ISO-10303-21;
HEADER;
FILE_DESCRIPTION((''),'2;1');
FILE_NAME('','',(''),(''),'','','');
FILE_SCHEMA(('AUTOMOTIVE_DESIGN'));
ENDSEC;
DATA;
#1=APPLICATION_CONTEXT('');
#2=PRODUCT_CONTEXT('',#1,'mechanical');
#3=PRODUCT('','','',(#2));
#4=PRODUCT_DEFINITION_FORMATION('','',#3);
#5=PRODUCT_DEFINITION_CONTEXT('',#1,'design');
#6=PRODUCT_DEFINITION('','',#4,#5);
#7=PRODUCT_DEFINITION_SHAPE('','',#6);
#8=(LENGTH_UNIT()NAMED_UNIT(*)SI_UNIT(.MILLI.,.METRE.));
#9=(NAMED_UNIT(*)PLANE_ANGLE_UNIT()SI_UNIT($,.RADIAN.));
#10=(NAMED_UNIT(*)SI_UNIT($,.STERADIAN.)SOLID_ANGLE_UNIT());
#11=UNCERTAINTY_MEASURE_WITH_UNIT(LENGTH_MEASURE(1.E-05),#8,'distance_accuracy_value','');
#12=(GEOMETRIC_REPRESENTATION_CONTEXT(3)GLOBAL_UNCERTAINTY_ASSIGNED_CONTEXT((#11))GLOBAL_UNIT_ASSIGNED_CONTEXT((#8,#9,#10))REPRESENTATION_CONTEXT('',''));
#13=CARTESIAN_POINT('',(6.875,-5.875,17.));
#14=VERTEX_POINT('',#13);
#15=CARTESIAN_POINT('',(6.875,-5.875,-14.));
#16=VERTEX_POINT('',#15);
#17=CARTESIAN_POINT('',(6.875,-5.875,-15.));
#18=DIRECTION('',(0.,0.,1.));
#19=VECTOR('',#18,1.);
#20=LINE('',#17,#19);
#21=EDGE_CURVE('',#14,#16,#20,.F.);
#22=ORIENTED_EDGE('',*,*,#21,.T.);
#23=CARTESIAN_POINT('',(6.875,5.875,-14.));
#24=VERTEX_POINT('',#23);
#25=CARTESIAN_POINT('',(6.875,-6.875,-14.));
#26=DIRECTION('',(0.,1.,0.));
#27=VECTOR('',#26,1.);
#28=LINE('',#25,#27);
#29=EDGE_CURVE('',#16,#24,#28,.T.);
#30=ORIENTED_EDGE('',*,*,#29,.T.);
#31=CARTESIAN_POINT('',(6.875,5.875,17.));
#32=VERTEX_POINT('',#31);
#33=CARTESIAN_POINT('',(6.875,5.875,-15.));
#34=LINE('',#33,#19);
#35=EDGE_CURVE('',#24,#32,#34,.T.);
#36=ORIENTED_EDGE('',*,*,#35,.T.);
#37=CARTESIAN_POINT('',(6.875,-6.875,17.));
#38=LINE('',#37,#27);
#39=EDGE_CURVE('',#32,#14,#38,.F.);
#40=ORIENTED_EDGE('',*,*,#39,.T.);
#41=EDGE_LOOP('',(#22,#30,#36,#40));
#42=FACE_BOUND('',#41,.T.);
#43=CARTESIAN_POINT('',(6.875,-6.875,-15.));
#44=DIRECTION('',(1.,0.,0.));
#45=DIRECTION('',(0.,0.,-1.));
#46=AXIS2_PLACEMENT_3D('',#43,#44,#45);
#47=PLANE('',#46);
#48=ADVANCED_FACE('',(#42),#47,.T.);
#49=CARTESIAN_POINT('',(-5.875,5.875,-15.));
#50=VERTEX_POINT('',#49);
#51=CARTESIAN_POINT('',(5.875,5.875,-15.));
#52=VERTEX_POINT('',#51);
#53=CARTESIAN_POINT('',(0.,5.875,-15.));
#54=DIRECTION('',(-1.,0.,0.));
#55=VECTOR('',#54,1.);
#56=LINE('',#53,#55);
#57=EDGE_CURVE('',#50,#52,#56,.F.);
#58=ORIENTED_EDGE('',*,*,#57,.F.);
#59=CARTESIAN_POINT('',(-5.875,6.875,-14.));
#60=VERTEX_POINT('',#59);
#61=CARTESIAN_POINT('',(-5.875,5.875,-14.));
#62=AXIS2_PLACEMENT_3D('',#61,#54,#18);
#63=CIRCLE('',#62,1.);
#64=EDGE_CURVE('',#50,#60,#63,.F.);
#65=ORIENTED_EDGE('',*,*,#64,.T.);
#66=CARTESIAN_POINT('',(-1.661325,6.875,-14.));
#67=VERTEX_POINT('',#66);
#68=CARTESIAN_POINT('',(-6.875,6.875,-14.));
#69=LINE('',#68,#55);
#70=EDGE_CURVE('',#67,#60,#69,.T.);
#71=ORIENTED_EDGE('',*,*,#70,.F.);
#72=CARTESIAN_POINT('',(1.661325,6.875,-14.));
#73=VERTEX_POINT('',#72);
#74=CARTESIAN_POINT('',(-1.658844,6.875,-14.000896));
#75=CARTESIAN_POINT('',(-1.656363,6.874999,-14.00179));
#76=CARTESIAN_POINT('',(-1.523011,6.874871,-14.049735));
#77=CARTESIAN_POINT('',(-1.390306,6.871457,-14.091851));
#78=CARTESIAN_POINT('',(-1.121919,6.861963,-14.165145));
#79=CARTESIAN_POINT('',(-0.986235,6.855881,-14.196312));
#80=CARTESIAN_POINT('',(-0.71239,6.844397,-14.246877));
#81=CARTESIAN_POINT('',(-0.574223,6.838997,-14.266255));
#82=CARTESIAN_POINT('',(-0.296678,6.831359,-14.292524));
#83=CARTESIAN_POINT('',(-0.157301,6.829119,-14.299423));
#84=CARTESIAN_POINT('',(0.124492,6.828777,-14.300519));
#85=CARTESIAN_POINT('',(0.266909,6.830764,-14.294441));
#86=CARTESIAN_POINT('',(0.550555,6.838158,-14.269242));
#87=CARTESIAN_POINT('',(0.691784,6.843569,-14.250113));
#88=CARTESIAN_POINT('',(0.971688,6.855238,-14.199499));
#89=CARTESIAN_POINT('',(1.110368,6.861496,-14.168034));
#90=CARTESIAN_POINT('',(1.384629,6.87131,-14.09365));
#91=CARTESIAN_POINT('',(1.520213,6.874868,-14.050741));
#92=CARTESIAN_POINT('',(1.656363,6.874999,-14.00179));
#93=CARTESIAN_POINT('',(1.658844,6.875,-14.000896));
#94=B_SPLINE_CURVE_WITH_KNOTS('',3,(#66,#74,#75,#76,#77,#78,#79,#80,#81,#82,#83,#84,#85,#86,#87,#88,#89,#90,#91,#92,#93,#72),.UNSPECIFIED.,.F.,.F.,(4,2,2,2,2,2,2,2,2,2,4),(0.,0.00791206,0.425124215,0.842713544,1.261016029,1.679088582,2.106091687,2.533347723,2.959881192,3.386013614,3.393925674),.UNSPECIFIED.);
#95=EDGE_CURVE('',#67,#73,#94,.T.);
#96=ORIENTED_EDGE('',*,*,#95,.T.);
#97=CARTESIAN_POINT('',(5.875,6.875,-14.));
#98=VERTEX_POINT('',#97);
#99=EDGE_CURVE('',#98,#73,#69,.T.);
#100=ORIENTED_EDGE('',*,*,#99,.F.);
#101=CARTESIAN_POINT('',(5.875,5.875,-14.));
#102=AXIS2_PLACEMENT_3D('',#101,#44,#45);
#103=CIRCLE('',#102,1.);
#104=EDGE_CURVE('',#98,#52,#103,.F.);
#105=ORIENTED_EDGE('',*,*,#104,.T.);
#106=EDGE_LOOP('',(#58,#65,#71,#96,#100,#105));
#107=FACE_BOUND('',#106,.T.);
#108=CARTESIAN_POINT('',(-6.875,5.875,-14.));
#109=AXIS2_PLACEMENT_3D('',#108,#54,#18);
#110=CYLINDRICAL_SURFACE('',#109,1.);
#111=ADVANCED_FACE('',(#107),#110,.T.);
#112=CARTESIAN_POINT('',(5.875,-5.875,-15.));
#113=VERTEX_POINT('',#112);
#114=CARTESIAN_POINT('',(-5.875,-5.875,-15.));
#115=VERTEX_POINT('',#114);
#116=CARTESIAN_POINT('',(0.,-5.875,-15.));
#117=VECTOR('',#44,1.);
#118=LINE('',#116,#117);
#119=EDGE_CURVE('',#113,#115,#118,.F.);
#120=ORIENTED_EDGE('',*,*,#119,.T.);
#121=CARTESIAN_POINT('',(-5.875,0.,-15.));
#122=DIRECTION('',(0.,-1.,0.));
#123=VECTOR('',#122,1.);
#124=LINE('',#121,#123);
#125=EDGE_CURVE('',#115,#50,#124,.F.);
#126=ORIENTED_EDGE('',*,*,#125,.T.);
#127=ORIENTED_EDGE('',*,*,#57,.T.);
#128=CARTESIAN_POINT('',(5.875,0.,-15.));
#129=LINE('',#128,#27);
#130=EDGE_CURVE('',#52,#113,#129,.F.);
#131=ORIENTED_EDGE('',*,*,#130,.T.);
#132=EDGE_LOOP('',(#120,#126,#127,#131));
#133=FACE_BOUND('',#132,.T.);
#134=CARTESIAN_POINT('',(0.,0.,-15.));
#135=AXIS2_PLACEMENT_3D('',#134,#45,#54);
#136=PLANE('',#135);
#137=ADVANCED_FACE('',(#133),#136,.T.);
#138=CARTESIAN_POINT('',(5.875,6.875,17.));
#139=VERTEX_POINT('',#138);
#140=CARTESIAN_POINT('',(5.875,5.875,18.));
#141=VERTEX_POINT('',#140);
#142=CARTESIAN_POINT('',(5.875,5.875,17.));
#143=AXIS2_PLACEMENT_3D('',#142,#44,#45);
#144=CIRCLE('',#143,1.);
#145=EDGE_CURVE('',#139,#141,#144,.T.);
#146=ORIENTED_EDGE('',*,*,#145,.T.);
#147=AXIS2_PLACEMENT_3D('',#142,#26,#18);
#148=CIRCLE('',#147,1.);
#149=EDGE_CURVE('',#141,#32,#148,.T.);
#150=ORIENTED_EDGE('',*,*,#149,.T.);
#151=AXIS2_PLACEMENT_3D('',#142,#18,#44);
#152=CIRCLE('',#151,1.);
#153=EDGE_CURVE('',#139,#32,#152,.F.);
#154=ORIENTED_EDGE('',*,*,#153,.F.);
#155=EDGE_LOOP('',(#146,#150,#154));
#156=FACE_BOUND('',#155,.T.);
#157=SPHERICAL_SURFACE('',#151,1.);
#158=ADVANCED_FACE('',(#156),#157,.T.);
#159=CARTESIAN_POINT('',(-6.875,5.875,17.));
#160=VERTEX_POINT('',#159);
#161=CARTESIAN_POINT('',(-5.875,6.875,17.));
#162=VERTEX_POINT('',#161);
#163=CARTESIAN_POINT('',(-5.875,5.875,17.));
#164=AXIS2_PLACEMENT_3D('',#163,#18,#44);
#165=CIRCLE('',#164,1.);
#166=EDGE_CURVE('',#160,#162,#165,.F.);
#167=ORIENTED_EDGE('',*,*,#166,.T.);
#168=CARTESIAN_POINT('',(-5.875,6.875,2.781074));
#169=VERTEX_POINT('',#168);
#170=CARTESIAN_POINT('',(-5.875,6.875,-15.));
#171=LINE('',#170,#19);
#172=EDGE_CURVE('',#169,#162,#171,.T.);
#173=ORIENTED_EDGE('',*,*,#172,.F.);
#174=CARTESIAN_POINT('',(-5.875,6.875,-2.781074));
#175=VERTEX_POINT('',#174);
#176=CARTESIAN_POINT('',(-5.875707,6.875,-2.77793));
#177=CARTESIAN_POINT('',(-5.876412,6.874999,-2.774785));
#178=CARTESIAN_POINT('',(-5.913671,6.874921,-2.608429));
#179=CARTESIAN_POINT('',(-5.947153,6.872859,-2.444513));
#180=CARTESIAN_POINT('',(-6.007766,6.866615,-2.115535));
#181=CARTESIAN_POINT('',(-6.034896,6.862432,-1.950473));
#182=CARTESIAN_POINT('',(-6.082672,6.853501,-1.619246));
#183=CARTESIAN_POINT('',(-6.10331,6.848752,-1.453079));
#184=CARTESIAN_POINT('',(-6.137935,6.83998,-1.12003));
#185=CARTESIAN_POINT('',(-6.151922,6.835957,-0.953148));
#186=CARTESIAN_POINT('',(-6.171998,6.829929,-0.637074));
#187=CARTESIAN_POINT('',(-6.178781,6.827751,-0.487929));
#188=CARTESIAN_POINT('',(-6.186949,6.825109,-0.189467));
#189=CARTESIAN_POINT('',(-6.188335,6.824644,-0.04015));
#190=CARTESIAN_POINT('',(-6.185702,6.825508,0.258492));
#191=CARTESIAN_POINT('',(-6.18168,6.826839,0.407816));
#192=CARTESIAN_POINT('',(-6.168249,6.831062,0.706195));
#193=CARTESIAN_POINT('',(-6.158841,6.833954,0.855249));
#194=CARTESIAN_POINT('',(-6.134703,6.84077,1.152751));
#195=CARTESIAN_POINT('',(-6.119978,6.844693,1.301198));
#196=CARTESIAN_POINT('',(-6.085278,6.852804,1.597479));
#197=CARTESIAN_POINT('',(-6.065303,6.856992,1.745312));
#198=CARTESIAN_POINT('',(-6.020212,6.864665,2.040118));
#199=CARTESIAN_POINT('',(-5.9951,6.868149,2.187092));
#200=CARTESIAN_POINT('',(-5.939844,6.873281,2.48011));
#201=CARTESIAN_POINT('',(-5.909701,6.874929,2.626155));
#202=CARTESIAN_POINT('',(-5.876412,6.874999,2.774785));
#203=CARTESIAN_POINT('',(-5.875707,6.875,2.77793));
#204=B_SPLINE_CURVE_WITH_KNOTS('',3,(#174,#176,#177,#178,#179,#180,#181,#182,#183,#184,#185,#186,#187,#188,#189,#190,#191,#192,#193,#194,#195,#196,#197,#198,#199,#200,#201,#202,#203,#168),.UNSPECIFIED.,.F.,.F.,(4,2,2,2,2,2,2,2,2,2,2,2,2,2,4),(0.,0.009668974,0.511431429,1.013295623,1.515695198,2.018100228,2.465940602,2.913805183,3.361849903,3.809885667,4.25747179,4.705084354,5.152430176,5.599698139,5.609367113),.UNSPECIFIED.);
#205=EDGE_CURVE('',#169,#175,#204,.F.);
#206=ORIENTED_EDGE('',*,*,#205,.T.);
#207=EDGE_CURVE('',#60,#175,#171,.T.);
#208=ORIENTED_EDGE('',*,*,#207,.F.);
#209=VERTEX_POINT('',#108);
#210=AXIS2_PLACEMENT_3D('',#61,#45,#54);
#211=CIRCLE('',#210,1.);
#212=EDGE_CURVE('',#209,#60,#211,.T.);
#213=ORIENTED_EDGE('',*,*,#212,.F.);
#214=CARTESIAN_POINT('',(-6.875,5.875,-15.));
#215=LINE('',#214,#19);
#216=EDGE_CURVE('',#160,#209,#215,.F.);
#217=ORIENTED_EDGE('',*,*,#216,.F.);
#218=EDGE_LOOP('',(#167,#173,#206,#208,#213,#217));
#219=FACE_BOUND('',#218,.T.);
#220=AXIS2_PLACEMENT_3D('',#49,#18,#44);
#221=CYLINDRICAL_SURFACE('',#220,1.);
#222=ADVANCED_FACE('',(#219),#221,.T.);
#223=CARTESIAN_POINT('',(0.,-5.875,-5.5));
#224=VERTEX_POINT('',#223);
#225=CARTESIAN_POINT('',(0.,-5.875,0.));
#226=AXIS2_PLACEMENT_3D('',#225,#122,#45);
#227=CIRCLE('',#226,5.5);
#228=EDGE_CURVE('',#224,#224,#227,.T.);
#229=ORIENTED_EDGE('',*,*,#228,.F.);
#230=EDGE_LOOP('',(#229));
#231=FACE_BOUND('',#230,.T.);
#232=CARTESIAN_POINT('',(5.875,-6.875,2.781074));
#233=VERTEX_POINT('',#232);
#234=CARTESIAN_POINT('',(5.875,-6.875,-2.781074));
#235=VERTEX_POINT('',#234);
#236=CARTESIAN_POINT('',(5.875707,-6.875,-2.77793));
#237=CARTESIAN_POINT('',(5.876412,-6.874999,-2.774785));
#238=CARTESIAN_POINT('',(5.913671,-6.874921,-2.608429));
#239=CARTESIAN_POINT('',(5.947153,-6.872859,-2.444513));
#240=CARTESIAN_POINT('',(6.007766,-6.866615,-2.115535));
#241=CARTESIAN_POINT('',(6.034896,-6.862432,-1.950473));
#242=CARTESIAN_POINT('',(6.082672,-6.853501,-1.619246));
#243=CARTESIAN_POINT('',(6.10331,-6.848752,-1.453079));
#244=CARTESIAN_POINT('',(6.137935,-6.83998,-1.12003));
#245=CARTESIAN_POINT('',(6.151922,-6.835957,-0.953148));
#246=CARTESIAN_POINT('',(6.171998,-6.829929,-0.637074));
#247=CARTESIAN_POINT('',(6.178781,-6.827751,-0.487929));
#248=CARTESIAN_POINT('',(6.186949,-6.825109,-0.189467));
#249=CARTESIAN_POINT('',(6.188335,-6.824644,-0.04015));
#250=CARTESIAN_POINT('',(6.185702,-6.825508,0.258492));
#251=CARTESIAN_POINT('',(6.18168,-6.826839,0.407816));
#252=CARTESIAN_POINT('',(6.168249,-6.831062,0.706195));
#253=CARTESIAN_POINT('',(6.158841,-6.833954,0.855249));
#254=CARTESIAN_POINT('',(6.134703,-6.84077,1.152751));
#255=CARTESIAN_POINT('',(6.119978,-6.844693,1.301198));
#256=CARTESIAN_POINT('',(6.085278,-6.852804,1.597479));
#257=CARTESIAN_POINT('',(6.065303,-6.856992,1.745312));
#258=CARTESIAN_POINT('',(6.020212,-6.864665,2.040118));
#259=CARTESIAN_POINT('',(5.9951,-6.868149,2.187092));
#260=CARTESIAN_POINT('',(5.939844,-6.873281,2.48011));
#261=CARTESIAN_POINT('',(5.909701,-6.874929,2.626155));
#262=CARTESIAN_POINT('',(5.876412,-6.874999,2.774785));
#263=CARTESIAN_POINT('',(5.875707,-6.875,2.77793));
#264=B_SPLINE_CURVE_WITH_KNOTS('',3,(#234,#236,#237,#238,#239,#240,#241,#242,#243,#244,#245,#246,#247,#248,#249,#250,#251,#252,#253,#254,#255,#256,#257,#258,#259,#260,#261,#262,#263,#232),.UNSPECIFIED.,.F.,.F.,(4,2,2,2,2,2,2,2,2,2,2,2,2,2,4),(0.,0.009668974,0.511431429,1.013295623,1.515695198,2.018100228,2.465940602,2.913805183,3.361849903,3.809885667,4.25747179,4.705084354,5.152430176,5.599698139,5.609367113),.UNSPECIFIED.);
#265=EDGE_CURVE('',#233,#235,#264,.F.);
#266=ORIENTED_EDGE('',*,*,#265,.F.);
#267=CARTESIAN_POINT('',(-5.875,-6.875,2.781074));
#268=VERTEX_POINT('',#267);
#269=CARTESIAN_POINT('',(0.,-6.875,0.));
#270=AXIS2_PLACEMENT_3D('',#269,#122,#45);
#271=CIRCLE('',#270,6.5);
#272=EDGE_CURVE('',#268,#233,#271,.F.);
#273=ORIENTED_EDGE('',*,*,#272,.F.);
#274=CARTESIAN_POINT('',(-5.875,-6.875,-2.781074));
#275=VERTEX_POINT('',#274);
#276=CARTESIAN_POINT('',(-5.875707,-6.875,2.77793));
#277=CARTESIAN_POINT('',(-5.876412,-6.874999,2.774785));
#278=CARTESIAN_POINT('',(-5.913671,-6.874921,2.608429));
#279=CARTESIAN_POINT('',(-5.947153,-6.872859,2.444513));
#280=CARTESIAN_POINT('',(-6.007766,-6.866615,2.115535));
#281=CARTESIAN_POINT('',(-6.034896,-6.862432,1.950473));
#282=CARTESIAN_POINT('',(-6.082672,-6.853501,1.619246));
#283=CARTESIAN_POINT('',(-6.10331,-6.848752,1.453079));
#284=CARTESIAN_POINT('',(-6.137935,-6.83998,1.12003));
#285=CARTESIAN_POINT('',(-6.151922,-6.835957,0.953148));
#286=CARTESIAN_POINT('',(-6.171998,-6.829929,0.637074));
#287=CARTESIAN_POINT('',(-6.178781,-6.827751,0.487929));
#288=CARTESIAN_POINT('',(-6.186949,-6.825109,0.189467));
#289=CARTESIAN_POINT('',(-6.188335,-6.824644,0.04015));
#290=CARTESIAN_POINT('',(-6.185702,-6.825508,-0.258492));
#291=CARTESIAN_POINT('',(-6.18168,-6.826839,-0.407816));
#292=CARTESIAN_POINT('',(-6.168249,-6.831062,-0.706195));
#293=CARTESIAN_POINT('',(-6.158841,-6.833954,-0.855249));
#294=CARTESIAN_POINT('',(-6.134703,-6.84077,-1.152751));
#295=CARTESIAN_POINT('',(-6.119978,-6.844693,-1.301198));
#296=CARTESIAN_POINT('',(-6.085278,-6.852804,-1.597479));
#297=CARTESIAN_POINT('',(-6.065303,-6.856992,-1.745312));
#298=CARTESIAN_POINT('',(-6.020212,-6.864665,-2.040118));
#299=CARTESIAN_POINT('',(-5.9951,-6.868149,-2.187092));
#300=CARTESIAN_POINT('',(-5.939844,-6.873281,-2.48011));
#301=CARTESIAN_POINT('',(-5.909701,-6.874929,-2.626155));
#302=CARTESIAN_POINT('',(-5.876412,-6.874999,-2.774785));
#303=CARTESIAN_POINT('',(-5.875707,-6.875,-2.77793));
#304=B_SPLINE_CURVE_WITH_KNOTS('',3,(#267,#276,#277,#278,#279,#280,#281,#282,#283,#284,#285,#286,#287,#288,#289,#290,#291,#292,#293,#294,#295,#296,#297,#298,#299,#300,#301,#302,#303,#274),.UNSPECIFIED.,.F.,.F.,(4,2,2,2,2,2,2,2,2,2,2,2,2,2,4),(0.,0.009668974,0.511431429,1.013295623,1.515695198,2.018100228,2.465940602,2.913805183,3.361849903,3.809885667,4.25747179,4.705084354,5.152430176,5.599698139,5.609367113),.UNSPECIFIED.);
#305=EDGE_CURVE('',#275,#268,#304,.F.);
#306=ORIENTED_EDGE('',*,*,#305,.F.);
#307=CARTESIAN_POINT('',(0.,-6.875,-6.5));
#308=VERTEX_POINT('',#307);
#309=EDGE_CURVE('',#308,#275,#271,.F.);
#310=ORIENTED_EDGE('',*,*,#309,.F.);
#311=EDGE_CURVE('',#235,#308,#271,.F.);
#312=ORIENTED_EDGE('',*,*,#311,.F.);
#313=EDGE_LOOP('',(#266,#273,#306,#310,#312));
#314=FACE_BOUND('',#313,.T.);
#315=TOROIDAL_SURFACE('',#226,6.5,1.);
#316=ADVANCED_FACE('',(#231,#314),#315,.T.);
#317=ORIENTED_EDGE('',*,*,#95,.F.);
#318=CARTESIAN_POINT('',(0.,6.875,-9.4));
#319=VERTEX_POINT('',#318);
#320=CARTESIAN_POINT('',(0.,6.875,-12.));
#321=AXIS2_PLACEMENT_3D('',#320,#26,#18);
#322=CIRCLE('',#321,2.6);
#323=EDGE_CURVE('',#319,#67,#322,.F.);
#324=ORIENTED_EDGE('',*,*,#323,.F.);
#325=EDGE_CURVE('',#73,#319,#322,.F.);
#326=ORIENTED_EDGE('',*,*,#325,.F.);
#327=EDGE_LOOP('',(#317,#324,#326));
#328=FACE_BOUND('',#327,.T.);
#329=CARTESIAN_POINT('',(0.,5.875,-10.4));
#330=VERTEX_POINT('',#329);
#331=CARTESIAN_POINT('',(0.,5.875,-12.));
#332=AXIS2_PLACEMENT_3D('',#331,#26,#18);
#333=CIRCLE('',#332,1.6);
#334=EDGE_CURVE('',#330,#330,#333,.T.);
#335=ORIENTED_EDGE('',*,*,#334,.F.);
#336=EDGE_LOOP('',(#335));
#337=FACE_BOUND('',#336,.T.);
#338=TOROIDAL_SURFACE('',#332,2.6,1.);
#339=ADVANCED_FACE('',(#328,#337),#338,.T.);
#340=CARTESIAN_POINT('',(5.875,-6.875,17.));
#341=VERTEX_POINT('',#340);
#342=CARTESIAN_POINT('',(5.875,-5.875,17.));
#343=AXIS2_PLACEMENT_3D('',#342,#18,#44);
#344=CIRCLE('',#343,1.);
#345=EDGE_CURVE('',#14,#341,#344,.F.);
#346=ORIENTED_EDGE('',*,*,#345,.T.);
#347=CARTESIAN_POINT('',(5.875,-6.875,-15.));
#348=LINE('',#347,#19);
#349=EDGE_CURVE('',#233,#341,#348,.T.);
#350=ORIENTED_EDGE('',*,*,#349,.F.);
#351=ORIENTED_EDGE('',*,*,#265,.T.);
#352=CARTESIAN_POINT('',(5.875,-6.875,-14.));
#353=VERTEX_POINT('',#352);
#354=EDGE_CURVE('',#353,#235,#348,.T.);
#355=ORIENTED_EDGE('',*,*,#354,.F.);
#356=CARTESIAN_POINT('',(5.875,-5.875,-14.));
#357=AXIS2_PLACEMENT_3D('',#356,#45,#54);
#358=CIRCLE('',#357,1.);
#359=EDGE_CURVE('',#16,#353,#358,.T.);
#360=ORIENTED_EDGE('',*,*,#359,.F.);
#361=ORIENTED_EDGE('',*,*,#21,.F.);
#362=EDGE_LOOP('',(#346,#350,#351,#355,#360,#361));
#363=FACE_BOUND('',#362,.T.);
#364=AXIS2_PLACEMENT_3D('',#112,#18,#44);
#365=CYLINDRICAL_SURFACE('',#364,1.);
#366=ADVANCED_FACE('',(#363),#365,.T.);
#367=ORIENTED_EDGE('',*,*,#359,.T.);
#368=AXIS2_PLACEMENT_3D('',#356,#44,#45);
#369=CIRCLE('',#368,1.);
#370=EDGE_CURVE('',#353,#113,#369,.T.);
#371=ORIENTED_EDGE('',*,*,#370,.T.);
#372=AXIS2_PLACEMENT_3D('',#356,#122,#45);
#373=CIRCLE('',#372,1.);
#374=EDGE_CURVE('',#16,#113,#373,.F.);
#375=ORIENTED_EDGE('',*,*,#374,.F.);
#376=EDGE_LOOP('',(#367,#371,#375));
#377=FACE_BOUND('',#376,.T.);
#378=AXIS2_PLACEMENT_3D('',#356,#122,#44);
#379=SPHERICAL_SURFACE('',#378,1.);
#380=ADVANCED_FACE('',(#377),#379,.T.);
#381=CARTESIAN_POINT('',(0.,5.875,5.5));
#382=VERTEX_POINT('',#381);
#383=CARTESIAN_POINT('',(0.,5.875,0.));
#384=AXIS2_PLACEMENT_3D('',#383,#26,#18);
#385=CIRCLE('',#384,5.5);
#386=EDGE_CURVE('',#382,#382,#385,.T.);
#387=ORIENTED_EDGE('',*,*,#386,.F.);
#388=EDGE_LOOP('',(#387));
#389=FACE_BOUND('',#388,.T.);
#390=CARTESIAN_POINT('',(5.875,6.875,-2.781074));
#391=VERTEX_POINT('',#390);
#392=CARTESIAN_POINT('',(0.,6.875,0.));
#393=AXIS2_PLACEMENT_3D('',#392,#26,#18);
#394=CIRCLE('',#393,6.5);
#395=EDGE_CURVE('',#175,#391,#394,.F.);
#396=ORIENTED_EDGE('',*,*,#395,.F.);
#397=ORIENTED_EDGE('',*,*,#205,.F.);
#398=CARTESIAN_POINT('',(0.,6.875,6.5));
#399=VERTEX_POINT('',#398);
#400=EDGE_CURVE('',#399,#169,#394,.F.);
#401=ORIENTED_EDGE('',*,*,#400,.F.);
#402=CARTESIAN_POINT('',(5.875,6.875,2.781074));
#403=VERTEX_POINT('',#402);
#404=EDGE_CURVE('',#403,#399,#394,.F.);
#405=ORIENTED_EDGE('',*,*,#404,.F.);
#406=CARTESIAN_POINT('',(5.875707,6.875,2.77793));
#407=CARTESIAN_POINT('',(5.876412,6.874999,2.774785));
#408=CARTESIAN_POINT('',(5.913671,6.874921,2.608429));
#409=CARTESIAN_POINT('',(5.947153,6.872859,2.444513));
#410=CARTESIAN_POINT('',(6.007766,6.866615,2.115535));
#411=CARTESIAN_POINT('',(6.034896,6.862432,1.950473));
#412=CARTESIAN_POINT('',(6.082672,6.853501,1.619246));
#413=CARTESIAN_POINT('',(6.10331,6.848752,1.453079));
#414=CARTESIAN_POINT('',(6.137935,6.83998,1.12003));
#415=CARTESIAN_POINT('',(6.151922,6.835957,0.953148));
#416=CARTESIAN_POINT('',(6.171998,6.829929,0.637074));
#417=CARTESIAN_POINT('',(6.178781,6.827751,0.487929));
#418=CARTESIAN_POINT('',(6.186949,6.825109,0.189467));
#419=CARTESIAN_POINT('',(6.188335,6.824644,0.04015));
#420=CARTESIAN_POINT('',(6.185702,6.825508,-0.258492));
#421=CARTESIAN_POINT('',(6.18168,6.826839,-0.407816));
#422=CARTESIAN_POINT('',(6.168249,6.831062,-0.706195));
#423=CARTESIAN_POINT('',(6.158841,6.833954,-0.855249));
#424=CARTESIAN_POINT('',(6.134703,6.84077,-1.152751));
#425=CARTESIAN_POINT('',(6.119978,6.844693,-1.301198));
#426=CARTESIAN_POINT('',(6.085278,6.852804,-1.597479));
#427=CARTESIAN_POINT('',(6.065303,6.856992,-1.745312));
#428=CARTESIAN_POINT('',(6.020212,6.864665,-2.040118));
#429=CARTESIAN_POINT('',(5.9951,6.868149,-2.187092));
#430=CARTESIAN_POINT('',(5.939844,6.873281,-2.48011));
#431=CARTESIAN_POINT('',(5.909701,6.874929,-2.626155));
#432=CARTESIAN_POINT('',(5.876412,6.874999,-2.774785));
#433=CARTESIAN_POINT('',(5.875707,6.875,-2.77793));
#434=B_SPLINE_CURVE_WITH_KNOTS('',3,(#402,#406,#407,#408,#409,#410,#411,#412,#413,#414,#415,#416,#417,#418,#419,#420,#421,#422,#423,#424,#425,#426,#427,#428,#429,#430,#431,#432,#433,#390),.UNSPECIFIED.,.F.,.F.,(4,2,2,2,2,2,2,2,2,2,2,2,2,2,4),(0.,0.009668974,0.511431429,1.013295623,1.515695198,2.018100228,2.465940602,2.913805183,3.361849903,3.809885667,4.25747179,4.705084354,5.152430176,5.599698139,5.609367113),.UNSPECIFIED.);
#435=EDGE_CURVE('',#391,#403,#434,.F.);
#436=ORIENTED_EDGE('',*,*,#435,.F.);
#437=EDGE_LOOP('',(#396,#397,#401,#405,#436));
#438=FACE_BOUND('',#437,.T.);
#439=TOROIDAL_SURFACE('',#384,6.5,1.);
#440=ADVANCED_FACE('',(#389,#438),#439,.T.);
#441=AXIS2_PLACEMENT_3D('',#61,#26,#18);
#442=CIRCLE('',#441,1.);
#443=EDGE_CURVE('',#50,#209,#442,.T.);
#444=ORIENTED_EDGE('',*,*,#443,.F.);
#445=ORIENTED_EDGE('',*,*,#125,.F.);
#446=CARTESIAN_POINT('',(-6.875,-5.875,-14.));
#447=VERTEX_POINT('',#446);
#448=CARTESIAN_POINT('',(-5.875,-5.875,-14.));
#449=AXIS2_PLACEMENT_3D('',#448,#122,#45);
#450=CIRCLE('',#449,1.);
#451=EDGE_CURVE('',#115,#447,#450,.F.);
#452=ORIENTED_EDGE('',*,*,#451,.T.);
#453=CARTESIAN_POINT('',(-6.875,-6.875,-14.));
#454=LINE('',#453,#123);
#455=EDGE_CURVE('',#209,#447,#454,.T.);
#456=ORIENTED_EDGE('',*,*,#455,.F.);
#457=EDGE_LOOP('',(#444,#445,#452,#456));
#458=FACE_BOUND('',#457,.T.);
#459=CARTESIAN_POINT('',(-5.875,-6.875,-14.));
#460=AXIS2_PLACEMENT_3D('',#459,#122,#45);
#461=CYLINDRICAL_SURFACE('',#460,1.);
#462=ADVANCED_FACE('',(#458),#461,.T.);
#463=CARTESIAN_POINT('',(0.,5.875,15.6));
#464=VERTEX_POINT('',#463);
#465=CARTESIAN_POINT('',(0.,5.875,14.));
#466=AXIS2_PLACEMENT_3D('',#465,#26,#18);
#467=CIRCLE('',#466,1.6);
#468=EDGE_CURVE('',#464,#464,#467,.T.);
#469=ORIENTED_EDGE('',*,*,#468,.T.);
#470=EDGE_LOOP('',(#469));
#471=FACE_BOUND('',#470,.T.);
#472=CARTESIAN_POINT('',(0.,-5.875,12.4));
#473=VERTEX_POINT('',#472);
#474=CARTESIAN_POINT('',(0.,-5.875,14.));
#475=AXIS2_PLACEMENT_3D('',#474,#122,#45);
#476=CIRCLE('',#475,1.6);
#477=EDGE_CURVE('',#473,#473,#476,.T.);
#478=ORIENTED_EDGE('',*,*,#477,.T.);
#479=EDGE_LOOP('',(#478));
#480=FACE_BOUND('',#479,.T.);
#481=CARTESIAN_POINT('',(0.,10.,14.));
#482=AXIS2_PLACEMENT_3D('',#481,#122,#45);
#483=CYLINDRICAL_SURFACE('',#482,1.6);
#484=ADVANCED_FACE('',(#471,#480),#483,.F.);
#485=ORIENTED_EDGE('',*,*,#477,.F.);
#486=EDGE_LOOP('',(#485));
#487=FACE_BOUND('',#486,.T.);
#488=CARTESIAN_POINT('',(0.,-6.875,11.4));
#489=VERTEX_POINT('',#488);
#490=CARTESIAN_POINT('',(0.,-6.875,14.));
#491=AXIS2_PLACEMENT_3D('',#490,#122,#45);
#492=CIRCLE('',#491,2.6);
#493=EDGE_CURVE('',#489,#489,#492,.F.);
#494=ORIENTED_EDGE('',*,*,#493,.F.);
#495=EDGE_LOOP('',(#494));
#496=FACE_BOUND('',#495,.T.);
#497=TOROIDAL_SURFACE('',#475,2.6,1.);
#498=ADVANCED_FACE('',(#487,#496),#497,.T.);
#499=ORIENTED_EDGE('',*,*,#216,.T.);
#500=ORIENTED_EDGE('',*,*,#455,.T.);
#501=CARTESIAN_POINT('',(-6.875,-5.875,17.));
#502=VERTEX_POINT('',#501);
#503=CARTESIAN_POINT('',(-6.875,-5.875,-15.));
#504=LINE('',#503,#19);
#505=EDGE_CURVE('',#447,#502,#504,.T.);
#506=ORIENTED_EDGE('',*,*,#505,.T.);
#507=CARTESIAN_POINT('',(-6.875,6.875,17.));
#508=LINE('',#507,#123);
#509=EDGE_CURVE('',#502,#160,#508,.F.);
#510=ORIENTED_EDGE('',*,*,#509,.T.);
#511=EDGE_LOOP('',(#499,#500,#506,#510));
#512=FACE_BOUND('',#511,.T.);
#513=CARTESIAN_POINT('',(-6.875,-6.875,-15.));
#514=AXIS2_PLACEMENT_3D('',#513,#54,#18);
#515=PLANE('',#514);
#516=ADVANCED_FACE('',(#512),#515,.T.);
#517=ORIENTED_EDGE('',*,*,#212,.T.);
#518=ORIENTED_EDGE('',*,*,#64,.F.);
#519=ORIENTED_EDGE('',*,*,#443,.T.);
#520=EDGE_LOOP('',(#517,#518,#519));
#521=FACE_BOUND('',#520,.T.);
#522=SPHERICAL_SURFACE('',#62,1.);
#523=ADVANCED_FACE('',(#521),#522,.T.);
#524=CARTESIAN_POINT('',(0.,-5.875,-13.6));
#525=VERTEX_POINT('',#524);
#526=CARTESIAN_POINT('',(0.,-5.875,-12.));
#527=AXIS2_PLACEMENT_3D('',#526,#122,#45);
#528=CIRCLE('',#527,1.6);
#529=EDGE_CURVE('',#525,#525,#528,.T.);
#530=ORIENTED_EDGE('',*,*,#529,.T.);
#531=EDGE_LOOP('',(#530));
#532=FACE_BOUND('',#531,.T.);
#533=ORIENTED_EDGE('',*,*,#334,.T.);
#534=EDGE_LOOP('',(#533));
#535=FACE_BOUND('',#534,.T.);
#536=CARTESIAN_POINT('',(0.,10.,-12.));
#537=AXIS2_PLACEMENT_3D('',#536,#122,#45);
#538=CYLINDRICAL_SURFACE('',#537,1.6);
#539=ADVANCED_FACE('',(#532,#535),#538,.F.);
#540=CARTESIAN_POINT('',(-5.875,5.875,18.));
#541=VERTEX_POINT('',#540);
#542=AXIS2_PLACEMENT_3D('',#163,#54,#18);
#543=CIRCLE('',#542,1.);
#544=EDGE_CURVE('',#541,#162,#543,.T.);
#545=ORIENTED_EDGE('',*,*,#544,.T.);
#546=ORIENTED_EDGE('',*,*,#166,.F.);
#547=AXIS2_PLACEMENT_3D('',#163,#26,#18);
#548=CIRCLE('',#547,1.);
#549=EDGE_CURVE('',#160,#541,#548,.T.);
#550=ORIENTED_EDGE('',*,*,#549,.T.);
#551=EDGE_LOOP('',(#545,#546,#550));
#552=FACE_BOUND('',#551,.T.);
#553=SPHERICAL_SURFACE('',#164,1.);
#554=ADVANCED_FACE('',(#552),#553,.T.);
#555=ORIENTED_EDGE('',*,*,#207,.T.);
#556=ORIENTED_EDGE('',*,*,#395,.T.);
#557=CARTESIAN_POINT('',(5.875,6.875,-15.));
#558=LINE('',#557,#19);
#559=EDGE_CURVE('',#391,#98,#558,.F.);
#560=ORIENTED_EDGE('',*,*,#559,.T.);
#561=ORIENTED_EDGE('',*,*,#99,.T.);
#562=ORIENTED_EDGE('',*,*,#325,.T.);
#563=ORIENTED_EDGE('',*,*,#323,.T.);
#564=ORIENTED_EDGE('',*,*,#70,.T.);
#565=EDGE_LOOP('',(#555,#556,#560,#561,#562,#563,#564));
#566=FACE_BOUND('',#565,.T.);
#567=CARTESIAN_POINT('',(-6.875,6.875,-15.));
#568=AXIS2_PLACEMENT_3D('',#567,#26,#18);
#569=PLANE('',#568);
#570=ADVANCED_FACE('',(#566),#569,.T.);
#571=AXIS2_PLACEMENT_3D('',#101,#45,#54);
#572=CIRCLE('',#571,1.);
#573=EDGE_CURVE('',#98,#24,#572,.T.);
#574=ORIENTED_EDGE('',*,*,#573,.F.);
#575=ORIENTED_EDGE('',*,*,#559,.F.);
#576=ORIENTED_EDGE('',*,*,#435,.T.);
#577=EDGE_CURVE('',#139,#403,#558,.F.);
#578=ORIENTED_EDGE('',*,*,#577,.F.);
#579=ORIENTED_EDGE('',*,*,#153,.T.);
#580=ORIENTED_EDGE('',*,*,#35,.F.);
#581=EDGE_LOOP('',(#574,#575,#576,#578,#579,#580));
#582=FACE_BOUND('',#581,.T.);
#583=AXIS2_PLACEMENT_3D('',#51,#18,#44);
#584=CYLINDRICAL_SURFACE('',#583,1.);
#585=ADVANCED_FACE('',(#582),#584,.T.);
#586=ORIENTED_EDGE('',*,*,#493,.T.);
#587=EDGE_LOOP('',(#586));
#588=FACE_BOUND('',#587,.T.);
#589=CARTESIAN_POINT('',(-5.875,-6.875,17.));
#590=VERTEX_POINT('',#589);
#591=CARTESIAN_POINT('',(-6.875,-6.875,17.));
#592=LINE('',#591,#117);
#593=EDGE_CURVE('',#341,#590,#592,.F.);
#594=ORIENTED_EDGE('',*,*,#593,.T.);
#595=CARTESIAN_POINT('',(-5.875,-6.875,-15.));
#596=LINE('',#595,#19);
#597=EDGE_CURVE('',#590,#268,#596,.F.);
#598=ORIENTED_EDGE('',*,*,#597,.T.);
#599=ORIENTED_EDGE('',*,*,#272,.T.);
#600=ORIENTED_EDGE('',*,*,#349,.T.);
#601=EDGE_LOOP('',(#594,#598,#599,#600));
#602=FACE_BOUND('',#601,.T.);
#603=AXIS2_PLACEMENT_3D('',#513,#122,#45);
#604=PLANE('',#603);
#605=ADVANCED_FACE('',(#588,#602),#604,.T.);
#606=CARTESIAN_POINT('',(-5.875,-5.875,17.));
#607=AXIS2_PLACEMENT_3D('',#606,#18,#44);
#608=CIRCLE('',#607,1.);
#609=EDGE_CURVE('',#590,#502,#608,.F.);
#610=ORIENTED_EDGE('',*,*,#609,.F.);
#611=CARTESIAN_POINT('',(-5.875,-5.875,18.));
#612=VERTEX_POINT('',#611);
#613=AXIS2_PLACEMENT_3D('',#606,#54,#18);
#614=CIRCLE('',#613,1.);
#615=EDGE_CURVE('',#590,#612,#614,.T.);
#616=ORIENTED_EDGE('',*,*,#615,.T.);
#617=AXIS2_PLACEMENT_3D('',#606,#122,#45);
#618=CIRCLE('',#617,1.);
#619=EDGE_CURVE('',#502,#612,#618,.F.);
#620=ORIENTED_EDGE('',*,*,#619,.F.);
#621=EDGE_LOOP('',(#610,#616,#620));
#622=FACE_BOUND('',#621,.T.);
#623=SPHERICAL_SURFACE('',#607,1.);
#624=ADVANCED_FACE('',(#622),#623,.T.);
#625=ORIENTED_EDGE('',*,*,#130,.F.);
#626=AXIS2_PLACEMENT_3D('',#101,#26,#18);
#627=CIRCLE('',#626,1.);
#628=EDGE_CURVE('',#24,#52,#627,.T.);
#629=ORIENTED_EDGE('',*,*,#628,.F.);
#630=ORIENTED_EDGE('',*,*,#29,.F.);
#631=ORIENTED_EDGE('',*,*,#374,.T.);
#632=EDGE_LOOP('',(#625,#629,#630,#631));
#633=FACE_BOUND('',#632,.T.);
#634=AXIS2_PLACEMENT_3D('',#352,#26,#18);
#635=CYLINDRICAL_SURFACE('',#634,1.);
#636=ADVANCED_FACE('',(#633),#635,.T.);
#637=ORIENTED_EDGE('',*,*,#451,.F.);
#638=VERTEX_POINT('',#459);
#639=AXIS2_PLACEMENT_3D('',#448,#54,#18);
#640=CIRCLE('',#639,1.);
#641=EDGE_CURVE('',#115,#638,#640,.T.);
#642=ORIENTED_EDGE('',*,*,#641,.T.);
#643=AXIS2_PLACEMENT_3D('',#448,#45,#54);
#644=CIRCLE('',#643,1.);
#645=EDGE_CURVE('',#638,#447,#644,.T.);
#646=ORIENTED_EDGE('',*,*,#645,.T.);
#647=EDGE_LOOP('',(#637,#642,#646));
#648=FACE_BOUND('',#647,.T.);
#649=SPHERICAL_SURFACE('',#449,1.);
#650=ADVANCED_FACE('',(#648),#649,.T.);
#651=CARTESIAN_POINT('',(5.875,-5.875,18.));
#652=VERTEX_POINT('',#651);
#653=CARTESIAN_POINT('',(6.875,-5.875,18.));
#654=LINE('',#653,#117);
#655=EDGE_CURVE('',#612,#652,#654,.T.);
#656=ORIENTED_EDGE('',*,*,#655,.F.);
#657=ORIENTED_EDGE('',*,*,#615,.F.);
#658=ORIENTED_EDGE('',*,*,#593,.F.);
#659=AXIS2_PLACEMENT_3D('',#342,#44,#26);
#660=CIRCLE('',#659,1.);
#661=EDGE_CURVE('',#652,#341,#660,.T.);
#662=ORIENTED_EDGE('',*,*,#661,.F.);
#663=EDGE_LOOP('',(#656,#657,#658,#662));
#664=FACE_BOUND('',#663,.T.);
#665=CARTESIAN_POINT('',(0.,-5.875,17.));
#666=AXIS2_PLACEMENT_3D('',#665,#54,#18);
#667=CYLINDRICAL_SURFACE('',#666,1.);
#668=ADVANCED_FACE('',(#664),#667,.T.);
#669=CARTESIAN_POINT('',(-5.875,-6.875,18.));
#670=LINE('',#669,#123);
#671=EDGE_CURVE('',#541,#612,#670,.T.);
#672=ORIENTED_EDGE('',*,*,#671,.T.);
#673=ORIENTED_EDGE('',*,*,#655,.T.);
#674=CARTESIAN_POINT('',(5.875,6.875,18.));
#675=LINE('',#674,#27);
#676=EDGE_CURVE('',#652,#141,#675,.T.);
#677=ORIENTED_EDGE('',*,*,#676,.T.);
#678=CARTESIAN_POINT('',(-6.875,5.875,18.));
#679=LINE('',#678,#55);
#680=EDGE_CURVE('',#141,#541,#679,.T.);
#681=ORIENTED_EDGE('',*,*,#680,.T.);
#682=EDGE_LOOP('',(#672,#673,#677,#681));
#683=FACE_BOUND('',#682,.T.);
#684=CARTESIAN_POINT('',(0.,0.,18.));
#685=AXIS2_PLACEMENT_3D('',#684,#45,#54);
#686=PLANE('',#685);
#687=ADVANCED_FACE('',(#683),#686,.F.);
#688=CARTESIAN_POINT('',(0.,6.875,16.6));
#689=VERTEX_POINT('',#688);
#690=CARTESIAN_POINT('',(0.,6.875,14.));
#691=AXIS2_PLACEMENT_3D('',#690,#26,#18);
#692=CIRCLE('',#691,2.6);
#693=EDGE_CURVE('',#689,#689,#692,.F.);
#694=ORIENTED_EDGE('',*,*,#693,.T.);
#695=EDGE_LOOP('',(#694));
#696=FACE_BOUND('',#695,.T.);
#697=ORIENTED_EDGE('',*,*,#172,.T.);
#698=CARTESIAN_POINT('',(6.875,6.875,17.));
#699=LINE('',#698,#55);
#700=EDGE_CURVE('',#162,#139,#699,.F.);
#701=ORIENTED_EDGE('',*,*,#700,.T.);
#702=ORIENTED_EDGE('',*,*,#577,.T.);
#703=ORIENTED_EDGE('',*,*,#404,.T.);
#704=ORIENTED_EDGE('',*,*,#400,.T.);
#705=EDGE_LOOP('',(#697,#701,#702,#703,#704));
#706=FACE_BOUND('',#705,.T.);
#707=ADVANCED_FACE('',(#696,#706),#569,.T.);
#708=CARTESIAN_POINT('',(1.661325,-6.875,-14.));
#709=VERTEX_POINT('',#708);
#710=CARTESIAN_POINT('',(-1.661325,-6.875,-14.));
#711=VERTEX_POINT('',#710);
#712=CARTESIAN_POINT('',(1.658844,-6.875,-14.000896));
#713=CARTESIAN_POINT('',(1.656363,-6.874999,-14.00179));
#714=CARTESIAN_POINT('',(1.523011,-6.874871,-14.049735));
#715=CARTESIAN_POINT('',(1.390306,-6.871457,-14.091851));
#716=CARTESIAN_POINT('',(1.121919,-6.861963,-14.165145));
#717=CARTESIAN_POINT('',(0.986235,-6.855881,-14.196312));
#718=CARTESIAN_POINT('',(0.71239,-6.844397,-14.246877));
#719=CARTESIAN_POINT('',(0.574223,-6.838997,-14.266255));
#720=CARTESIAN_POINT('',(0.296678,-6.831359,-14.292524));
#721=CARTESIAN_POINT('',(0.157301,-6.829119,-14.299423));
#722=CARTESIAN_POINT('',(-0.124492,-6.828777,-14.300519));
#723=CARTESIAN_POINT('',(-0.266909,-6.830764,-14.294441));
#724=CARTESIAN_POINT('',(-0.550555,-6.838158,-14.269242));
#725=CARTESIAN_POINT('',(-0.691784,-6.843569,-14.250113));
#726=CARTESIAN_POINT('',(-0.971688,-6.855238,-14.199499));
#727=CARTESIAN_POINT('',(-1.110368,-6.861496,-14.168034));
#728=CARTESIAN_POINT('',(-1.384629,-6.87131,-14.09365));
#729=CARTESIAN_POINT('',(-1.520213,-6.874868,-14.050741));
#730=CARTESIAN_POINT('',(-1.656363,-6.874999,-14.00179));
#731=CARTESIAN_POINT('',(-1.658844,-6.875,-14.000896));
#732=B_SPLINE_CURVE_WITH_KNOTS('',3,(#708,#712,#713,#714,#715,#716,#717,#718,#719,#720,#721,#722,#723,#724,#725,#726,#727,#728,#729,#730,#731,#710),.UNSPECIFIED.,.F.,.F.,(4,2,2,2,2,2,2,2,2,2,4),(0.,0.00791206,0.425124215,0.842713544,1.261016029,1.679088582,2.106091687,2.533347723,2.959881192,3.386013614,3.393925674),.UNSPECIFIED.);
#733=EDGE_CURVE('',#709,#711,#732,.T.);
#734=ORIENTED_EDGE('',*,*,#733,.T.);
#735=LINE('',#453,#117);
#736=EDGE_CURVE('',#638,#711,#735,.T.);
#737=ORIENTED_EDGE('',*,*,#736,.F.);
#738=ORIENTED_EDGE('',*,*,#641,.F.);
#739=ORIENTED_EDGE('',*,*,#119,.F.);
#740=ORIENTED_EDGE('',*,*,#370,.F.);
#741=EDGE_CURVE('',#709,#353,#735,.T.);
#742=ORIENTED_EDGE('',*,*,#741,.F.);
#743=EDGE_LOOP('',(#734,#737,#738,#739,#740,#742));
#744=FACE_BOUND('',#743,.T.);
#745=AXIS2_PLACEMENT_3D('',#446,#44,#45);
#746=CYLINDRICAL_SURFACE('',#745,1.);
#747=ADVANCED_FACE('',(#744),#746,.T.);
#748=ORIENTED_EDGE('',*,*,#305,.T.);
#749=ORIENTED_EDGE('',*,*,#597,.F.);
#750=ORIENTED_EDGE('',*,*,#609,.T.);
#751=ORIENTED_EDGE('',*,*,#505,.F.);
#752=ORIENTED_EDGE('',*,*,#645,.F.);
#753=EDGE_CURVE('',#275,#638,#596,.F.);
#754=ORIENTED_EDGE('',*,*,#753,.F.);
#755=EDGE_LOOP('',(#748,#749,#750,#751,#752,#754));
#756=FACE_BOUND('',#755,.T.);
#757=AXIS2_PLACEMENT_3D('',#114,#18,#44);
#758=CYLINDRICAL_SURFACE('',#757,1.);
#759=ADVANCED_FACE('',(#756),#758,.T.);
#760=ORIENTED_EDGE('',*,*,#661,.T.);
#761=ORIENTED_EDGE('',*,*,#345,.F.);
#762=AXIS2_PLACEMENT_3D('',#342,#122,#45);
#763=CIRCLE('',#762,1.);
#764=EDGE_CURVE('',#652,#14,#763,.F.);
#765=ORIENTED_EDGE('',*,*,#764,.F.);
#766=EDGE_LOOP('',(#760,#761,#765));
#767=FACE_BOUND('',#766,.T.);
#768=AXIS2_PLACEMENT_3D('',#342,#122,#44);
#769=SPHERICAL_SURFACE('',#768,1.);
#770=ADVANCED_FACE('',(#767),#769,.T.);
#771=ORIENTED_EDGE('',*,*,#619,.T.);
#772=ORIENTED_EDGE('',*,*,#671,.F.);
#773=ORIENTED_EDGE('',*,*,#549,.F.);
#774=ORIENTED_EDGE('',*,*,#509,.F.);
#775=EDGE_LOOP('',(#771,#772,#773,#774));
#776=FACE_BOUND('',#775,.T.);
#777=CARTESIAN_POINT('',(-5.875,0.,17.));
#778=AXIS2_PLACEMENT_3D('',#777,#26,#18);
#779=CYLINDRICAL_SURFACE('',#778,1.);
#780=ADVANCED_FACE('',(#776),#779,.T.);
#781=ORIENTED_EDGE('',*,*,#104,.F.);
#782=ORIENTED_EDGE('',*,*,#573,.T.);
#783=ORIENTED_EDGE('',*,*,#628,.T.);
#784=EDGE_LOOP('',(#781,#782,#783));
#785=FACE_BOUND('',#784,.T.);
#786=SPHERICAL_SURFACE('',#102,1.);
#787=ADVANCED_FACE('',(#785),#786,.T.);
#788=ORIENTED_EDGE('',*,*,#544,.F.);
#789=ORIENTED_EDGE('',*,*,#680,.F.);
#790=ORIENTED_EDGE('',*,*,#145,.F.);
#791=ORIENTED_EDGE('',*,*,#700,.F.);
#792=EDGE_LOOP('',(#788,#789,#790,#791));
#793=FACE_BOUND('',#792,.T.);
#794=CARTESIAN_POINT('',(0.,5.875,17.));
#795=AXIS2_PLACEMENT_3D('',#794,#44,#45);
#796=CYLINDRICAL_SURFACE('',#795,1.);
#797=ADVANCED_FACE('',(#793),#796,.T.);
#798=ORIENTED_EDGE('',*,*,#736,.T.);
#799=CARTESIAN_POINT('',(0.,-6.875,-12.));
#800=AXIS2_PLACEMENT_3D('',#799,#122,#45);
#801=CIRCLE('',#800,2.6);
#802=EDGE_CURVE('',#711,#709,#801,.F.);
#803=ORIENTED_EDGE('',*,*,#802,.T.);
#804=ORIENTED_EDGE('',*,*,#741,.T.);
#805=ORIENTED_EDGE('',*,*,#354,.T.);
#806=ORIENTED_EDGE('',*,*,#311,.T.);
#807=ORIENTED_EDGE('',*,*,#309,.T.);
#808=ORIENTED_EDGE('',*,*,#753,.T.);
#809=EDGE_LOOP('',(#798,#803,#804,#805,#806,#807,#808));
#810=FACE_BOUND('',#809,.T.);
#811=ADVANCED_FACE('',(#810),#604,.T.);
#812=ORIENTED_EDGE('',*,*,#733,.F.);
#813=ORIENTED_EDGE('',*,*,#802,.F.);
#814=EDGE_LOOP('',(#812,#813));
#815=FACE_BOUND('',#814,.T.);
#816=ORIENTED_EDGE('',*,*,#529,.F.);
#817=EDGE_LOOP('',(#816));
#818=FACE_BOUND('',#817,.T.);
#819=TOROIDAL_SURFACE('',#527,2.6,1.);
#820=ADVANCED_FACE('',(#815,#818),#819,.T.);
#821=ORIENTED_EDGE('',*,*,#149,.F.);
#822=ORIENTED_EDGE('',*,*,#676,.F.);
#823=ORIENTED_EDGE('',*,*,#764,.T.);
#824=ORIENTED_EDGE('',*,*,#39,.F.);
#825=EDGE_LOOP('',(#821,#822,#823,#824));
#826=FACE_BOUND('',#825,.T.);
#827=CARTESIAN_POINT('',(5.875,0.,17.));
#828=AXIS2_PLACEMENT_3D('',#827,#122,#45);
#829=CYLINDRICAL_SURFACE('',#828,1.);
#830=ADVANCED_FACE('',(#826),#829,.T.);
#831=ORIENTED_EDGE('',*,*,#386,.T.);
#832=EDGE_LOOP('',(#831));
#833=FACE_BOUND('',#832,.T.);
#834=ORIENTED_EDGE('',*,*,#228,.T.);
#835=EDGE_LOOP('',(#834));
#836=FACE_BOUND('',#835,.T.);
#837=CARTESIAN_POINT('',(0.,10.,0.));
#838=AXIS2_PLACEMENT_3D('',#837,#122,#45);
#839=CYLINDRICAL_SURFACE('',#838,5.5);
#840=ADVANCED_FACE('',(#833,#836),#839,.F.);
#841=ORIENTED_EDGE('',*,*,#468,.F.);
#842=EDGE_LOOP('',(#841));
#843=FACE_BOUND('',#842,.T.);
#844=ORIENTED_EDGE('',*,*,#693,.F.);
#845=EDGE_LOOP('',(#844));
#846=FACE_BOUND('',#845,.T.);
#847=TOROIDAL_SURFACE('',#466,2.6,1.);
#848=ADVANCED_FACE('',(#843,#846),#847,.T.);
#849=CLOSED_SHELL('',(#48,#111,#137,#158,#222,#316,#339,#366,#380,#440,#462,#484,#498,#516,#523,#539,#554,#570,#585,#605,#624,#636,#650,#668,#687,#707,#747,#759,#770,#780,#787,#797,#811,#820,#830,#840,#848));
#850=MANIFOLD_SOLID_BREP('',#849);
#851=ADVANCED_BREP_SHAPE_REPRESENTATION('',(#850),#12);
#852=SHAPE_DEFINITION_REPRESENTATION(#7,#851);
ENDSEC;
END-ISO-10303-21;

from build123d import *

# Parameters (mm, degrees)
BOSS_EXTRUDE1_DEPTH      = 18
BOSS_EXTRUDE1_DEPTH_BACK = 15
SKETCH1_W                = 13.75
SKETCH1_H                = 13.75
CUT_EXTRUDE1_DEPTH       = 10
CUT_EXTRUDE1_DEPTH_BACK  = 10
SKETCH2_R                = 1.6
SKETCH2_R_2              = 5.5
FILLET1_R                = 1


with BuildPart() as part:
    # Sketch1 → Boss-Extrude1 (new, two sides: drawn at the far end of the back side and taken through both)
    with BuildSketch(Plane.XY.offset(-BOSS_EXTRUDE1_DEPTH_BACK)):
        Rectangle(SKETCH1_W, SKETCH1_H)
    extrude(amount=BOSS_EXTRUDE1_DEPTH + BOSS_EXTRUDE1_DEPTH_BACK)

    # Sketch2 → Cut-Extrude1 (cut, two sides: drawn at the far end of the back side and taken through both)
    with BuildSketch(Plane(origin=(0, 0, 0), x_dir=(1, 0, 0), z_dir=(0, 1, 0)).offset(-CUT_EXTRUDE1_DEPTH_BACK)):
        with Locations(Location((0, 12, 0), (0, 0, 90))):
            Circle(SKETCH2_R)
        with Locations(Location((0, -14, 0), (0, 0, 90))):
            Circle(SKETCH2_R)
        with Locations(Location((0, 0, 0), (0, 0, 90))):
            Circle(SKETCH2_R_2)
    extrude(amount=CUT_EXTRUDE1_DEPTH + CUT_EXTRUDE1_DEPTH_BACK, mode=Mode.SUBTRACT)

    # Fillet1
    # the kernel refuses this fillet: 1 mm, written as the material it takes off along each edge
    with BuildSketch(Plane(origin=(5.875, -5.875, 17), x_dir=(1, 0, 0), z_dir=(0, -1, 0))) as fillet1_piece_1_section:
        Polygon((0, 0), (FILLET1_R, 0), (FILLET1_R, FILLET1_R), (0, FILLET1_R), align=None)
    fillet1_piece_1 = extrude(amount=FILLET1_R, mode=Mode.PRIVATE)
    fillet1_piece_1 = fillet1_piece_1 - Plane(origin=(5.875, -5.875, 17), x_dir=(-0.7071067811865475, 0, -0.7071067811865475), z_dir=(0, -1, 0)) * Sphere(FILLET1_R, mode=Mode.PRIVATE)
    add(fillet1_piece_1, mode=Mode.SUBTRACT)
    with BuildSketch(Plane(origin=(5.875, 5.875, 17), x_dir=(1, 0, 0), z_dir=(0, 1, 0))) as fillet1_piece_2_section:
        Polygon((0, 0), (FILLET1_R, 0), (FILLET1_R, -FILLET1_R), (0, -FILLET1_R), align=None)
    fillet1_piece_2 = extrude(amount=FILLET1_R, mode=Mode.PRIVATE)
    fillet1_piece_2 = fillet1_piece_2 - Plane(origin=(5.875, 5.875, 17), x_dir=(-0.7071067811865475, 0, -0.7071067811865475), z_dir=(0, 1, 0)) * Sphere(FILLET1_R, mode=Mode.PRIVATE)
    add(fillet1_piece_2, mode=Mode.SUBTRACT)
    with BuildSketch(Plane(origin=(-5.875, 5.875, -14), x_dir=(0, 1, 0), z_dir=(-1, 0, 0))) as fillet1_piece_3_section:
        Polygon((0, 0), (FILLET1_R, 0), (FILLET1_R, FILLET1_R), (0, FILLET1_R), align=None)
    fillet1_piece_3 = extrude(amount=FILLET1_R, mode=Mode.PRIVATE)
    fillet1_piece_3 = fillet1_piece_3 - Plane(origin=(-5.875, 5.875, -14), x_dir=(0, -0.7071067811865475, 0.7071067811865475), z_dir=(-1, 0, 0)) * Sphere(FILLET1_R, mode=Mode.PRIVATE)
    add(fillet1_piece_3, mode=Mode.SUBTRACT)
    with BuildSketch(Plane(origin=(-5.875, -5.875, -14), x_dir=(0, -1, 0), z_dir=(-1, 0, 0))) as fillet1_piece_4_section:
        Polygon((0, 0), (FILLET1_R, 0), (FILLET1_R, -FILLET1_R), (0, -FILLET1_R), align=None)
    fillet1_piece_4 = extrude(amount=FILLET1_R, mode=Mode.PRIVATE)
    fillet1_piece_4 = fillet1_piece_4 - Plane(origin=(-5.875, -5.875, -14), x_dir=(0, 0.7071067811865475, 0.7071067811865475), z_dir=(-1, 0, 0)) * Sphere(FILLET1_R, mode=Mode.PRIVATE)
    add(fillet1_piece_4, mode=Mode.SUBTRACT)
    with BuildSketch(Plane(origin=(-5.875, 5.875, 17), x_dir=(0, 1, 0), z_dir=(-1, 0, 0))) as fillet1_piece_5_section:
        Polygon((0, 0), (FILLET1_R, 0), (FILLET1_R, -FILLET1_R), (0, -FILLET1_R), align=None)
    fillet1_piece_5 = extrude(amount=FILLET1_R, mode=Mode.PRIVATE)
    fillet1_piece_5 = fillet1_piece_5 - Plane(origin=(-5.875, 5.875, 17), x_dir=(0, -0.7071067811865475, -0.7071067811865475), z_dir=(-1, 0, 0)) * Sphere(FILLET1_R, mode=Mode.PRIVATE)
    add(fillet1_piece_5, mode=Mode.SUBTRACT)
    with BuildSketch(Plane(origin=(-5.875, -5.875, 17), x_dir=(0, -1, 0), z_dir=(-1, 0, 0))) as fillet1_piece_6_section:
        Polygon((0, 0), (FILLET1_R, 0), (FILLET1_R, FILLET1_R), (0, FILLET1_R), align=None)
    fillet1_piece_6 = extrude(amount=FILLET1_R, mode=Mode.PRIVATE)
    fillet1_piece_6 = fillet1_piece_6 - Plane(origin=(-5.875, -5.875, 17), x_dir=(0, 0.7071067811865475, -0.7071067811865475), z_dir=(-1, 0, 0)) * Sphere(FILLET1_R, mode=Mode.PRIVATE)
    add(fillet1_piece_6, mode=Mode.SUBTRACT)
    with BuildSketch(Plane(origin=(5.875, -5.875, -14), x_dir=(1, 0, 0), z_dir=(0, -1, 0))) as fillet1_piece_7_section:
        Polygon((0, 0), (FILLET1_R, 0), (FILLET1_R, -FILLET1_R), (0, -FILLET1_R), align=None)
    fillet1_piece_7 = extrude(amount=FILLET1_R, mode=Mode.PRIVATE)
    fillet1_piece_7 = fillet1_piece_7 - Plane(origin=(5.875, -5.875, -14), x_dir=(-0.7071067811865475, 0, 0.7071067811865475), z_dir=(0, -1, 0)) * Sphere(FILLET1_R, mode=Mode.PRIVATE)
    add(fillet1_piece_7, mode=Mode.SUBTRACT)
    with BuildSketch(Plane(origin=(5.875, 5.875, -14), x_dir=(1, 0, 0), z_dir=(0, 1, 0))) as fillet1_piece_8_section:
        Polygon((0, 0), (FILLET1_R, 0), (FILLET1_R, FILLET1_R), (0, FILLET1_R), align=None)
    fillet1_piece_8 = extrude(amount=FILLET1_R, mode=Mode.PRIVATE)
    fillet1_piece_8 = fillet1_piece_8 - Plane(origin=(5.875, 5.875, -14), x_dir=(-0.7071067811865475, 0, 0.7071067811865475), z_dir=(0, 1, 0)) * Sphere(FILLET1_R, mode=Mode.PRIVATE)
    add(fillet1_piece_8, mode=Mode.SUBTRACT)
    with BuildSketch(Plane(origin=(6.875, -5.875, 18), x_dir=(0, 0, -1), z_dir=(0, 1, 0)), Plane(origin=(-6.875, 5.875, -15), x_dir=(1, 0, 0), z_dir=(0, -1, 0)), Plane(origin=(5.875, 6.875, 18), x_dir=(0, 0, -1), z_dir=(-1, 0, 0)), Plane(origin=(-5.875, -6.875, 18), x_dir=(0, 0, -1), z_dir=(1, 0, 0))) as fillet1_piece_9:
        with BuildLine():
            CenterArc((FILLET1_R, FILLET1_R), FILLET1_R, 180, 90)
            Line((0, FILLET1_R), (0, 0))
            Line((0, 0), (FILLET1_R, 0))
        make_face()
    extrude(amount=11.75, mode=Mode.SUBTRACT)
    with BuildSketch(Plane(origin=(-6.875, 5.875, 18), x_dir=(1, 0, 0), z_dir=(0, -1, 0)), Plane(origin=(-5.875, -6.875, -15), x_dir=(0, 0, 1), z_dir=(1, 0, 0)), Plane(origin=(6.875, -5.875, -15), x_dir=(0, 0, 1), z_dir=(0, 1, 0)), Plane(origin=(5.875, 6.875, -15), x_dir=(0, 0, 1), z_dir=(-1, 0, 0))) as fillet1_piece_10:
        with BuildLine():
            CenterArc((FILLET1_R, -FILLET1_R), FILLET1_R, 90, 90)
            Line((0, -FILLET1_R), (0, 0))
            Line((0, 0), (FILLET1_R, 0))
        make_face()
    extrude(amount=11.75, mode=Mode.SUBTRACT)
    with BuildSketch(Plane(origin=(0, -6.875, 14), x_dir=(0, 0, -1), z_dir=(1, 0, 0))) as fillet1_piece_11:
        with BuildLine():
            CenterArc((1.6 + FILLET1_R, FILLET1_R), FILLET1_R, 180, 90)
            Line((1.6, FILLET1_R), (1.6, 0))
            Line((1.6, 0), (1.6 + FILLET1_R, 0))
        make_face()
    revolve(axis=Axis((0, -6.875, 14), (0, 1, 0)), mode=Mode.SUBTRACT)
    with BuildSketch(Plane(origin=(0, 6.875, 14), x_dir=(0, 0, -1), z_dir=(-1, 0, 0))) as fillet1_piece_12:
        with BuildLine():
            CenterArc((1.6 + FILLET1_R, FILLET1_R), FILLET1_R, 180, 90)
            Line((1.6, FILLET1_R), (1.6, 0))
            Line((1.6, 0), (1.6 + FILLET1_R, 0))
        make_face()
    revolve(axis=Axis((0, 6.875, 14), (0, -1, 0)), mode=Mode.SUBTRACT)
    with BuildSketch(Plane(origin=(0, -6.875, 0), x_dir=(0, 0, -1), z_dir=(1, 0, 0))) as fillet1_piece_13:
        with BuildLine():
            CenterArc((5.5 + FILLET1_R, FILLET1_R), FILLET1_R, 180, 90)
            Line((5.5, FILLET1_R), (5.5, 0))
            Line((5.5, 0), (5.5 + FILLET1_R, 0))
        make_face()
    revolve(axis=Axis((0, -6.875, 0), (0, 1, 0)), mode=Mode.SUBTRACT)
    with BuildSketch(Plane(origin=(0, 6.875, 0), x_dir=(0, 0, -1), z_dir=(-1, 0, 0))) as fillet1_piece_14:
        with BuildLine():
            CenterArc((5.5 + FILLET1_R, FILLET1_R), FILLET1_R, 180, 90)
            Line((5.5, FILLET1_R), (5.5, 0))
            Line((5.5, 0), (5.5 + FILLET1_R, 0))
        make_face()
    revolve(axis=Axis((0, 6.875, 0), (0, -1, 0)), mode=Mode.SUBTRACT)
    with BuildSketch(Plane(origin=(0, -6.875, -12), x_dir=(0, 0, -1), z_dir=(1, 0, 0))) as fillet1_piece_15:
        with BuildLine():
            CenterArc((1.6 + FILLET1_R, FILLET1_R), FILLET1_R, 180, 90)
            Line((1.6, FILLET1_R), (1.6, 0))
            Line((1.6, 0), (1.6 + FILLET1_R, 0))
        make_face()
    revolve(axis=Axis((0, -6.875, -12), (0, 1, 0)), mode=Mode.SUBTRACT)
    with BuildSketch(Plane(origin=(0, 6.875, -12), x_dir=(0, 0, -1), z_dir=(-1, 0, 0))) as fillet1_piece_16:
        with BuildLine():
            CenterArc((1.6 + FILLET1_R, FILLET1_R), FILLET1_R, 180, 90)
            Line((1.6 + FILLET1_R, 0), (1.6, 0))
            Line((1.6, 0), (1.6, FILLET1_R))
        make_face()
    revolve(axis=Axis((0, 6.875, -12), (0, -1, 0)), mode=Mode.SUBTRACT)
    with BuildSketch(Plane(origin=(6.875, -6.875, -14), x_dir=(-1, 0, 0), z_dir=(0, 0, 1)), Plane(origin=(-6.875, -6.875, 17), x_dir=(1, 0, 0), z_dir=(0, 0, -1))) as fillet1_piece_17:
        with BuildLine():
            CenterArc((FILLET1_R, -FILLET1_R), FILLET1_R, 90, 90)
            Line((0, -FILLET1_R), (0, 0))
            Line((0, 0), (FILLET1_R, 0))
        make_face()
    extrude(amount=31, mode=Mode.SUBTRACT)
    with BuildSketch(Plane(origin=(-6.875, 6.875, 17), x_dir=(1, 0, 0), z_dir=(0, 0, -1)), Plane(origin=(6.875, 6.875, -14), x_dir=(-1, 0, 0), z_dir=(0, 0, 1))) as fillet1_piece_18:
        with BuildLine():
            CenterArc((FILLET1_R, FILLET1_R), FILLET1_R, 180, 90)
            Line((0, FILLET1_R), (0, 0))
            Line((0, 0), (FILLET1_R, 0))
        make_face()
    extrude(amount=31, mode=Mode.SUBTRACT)


solid = part.part
